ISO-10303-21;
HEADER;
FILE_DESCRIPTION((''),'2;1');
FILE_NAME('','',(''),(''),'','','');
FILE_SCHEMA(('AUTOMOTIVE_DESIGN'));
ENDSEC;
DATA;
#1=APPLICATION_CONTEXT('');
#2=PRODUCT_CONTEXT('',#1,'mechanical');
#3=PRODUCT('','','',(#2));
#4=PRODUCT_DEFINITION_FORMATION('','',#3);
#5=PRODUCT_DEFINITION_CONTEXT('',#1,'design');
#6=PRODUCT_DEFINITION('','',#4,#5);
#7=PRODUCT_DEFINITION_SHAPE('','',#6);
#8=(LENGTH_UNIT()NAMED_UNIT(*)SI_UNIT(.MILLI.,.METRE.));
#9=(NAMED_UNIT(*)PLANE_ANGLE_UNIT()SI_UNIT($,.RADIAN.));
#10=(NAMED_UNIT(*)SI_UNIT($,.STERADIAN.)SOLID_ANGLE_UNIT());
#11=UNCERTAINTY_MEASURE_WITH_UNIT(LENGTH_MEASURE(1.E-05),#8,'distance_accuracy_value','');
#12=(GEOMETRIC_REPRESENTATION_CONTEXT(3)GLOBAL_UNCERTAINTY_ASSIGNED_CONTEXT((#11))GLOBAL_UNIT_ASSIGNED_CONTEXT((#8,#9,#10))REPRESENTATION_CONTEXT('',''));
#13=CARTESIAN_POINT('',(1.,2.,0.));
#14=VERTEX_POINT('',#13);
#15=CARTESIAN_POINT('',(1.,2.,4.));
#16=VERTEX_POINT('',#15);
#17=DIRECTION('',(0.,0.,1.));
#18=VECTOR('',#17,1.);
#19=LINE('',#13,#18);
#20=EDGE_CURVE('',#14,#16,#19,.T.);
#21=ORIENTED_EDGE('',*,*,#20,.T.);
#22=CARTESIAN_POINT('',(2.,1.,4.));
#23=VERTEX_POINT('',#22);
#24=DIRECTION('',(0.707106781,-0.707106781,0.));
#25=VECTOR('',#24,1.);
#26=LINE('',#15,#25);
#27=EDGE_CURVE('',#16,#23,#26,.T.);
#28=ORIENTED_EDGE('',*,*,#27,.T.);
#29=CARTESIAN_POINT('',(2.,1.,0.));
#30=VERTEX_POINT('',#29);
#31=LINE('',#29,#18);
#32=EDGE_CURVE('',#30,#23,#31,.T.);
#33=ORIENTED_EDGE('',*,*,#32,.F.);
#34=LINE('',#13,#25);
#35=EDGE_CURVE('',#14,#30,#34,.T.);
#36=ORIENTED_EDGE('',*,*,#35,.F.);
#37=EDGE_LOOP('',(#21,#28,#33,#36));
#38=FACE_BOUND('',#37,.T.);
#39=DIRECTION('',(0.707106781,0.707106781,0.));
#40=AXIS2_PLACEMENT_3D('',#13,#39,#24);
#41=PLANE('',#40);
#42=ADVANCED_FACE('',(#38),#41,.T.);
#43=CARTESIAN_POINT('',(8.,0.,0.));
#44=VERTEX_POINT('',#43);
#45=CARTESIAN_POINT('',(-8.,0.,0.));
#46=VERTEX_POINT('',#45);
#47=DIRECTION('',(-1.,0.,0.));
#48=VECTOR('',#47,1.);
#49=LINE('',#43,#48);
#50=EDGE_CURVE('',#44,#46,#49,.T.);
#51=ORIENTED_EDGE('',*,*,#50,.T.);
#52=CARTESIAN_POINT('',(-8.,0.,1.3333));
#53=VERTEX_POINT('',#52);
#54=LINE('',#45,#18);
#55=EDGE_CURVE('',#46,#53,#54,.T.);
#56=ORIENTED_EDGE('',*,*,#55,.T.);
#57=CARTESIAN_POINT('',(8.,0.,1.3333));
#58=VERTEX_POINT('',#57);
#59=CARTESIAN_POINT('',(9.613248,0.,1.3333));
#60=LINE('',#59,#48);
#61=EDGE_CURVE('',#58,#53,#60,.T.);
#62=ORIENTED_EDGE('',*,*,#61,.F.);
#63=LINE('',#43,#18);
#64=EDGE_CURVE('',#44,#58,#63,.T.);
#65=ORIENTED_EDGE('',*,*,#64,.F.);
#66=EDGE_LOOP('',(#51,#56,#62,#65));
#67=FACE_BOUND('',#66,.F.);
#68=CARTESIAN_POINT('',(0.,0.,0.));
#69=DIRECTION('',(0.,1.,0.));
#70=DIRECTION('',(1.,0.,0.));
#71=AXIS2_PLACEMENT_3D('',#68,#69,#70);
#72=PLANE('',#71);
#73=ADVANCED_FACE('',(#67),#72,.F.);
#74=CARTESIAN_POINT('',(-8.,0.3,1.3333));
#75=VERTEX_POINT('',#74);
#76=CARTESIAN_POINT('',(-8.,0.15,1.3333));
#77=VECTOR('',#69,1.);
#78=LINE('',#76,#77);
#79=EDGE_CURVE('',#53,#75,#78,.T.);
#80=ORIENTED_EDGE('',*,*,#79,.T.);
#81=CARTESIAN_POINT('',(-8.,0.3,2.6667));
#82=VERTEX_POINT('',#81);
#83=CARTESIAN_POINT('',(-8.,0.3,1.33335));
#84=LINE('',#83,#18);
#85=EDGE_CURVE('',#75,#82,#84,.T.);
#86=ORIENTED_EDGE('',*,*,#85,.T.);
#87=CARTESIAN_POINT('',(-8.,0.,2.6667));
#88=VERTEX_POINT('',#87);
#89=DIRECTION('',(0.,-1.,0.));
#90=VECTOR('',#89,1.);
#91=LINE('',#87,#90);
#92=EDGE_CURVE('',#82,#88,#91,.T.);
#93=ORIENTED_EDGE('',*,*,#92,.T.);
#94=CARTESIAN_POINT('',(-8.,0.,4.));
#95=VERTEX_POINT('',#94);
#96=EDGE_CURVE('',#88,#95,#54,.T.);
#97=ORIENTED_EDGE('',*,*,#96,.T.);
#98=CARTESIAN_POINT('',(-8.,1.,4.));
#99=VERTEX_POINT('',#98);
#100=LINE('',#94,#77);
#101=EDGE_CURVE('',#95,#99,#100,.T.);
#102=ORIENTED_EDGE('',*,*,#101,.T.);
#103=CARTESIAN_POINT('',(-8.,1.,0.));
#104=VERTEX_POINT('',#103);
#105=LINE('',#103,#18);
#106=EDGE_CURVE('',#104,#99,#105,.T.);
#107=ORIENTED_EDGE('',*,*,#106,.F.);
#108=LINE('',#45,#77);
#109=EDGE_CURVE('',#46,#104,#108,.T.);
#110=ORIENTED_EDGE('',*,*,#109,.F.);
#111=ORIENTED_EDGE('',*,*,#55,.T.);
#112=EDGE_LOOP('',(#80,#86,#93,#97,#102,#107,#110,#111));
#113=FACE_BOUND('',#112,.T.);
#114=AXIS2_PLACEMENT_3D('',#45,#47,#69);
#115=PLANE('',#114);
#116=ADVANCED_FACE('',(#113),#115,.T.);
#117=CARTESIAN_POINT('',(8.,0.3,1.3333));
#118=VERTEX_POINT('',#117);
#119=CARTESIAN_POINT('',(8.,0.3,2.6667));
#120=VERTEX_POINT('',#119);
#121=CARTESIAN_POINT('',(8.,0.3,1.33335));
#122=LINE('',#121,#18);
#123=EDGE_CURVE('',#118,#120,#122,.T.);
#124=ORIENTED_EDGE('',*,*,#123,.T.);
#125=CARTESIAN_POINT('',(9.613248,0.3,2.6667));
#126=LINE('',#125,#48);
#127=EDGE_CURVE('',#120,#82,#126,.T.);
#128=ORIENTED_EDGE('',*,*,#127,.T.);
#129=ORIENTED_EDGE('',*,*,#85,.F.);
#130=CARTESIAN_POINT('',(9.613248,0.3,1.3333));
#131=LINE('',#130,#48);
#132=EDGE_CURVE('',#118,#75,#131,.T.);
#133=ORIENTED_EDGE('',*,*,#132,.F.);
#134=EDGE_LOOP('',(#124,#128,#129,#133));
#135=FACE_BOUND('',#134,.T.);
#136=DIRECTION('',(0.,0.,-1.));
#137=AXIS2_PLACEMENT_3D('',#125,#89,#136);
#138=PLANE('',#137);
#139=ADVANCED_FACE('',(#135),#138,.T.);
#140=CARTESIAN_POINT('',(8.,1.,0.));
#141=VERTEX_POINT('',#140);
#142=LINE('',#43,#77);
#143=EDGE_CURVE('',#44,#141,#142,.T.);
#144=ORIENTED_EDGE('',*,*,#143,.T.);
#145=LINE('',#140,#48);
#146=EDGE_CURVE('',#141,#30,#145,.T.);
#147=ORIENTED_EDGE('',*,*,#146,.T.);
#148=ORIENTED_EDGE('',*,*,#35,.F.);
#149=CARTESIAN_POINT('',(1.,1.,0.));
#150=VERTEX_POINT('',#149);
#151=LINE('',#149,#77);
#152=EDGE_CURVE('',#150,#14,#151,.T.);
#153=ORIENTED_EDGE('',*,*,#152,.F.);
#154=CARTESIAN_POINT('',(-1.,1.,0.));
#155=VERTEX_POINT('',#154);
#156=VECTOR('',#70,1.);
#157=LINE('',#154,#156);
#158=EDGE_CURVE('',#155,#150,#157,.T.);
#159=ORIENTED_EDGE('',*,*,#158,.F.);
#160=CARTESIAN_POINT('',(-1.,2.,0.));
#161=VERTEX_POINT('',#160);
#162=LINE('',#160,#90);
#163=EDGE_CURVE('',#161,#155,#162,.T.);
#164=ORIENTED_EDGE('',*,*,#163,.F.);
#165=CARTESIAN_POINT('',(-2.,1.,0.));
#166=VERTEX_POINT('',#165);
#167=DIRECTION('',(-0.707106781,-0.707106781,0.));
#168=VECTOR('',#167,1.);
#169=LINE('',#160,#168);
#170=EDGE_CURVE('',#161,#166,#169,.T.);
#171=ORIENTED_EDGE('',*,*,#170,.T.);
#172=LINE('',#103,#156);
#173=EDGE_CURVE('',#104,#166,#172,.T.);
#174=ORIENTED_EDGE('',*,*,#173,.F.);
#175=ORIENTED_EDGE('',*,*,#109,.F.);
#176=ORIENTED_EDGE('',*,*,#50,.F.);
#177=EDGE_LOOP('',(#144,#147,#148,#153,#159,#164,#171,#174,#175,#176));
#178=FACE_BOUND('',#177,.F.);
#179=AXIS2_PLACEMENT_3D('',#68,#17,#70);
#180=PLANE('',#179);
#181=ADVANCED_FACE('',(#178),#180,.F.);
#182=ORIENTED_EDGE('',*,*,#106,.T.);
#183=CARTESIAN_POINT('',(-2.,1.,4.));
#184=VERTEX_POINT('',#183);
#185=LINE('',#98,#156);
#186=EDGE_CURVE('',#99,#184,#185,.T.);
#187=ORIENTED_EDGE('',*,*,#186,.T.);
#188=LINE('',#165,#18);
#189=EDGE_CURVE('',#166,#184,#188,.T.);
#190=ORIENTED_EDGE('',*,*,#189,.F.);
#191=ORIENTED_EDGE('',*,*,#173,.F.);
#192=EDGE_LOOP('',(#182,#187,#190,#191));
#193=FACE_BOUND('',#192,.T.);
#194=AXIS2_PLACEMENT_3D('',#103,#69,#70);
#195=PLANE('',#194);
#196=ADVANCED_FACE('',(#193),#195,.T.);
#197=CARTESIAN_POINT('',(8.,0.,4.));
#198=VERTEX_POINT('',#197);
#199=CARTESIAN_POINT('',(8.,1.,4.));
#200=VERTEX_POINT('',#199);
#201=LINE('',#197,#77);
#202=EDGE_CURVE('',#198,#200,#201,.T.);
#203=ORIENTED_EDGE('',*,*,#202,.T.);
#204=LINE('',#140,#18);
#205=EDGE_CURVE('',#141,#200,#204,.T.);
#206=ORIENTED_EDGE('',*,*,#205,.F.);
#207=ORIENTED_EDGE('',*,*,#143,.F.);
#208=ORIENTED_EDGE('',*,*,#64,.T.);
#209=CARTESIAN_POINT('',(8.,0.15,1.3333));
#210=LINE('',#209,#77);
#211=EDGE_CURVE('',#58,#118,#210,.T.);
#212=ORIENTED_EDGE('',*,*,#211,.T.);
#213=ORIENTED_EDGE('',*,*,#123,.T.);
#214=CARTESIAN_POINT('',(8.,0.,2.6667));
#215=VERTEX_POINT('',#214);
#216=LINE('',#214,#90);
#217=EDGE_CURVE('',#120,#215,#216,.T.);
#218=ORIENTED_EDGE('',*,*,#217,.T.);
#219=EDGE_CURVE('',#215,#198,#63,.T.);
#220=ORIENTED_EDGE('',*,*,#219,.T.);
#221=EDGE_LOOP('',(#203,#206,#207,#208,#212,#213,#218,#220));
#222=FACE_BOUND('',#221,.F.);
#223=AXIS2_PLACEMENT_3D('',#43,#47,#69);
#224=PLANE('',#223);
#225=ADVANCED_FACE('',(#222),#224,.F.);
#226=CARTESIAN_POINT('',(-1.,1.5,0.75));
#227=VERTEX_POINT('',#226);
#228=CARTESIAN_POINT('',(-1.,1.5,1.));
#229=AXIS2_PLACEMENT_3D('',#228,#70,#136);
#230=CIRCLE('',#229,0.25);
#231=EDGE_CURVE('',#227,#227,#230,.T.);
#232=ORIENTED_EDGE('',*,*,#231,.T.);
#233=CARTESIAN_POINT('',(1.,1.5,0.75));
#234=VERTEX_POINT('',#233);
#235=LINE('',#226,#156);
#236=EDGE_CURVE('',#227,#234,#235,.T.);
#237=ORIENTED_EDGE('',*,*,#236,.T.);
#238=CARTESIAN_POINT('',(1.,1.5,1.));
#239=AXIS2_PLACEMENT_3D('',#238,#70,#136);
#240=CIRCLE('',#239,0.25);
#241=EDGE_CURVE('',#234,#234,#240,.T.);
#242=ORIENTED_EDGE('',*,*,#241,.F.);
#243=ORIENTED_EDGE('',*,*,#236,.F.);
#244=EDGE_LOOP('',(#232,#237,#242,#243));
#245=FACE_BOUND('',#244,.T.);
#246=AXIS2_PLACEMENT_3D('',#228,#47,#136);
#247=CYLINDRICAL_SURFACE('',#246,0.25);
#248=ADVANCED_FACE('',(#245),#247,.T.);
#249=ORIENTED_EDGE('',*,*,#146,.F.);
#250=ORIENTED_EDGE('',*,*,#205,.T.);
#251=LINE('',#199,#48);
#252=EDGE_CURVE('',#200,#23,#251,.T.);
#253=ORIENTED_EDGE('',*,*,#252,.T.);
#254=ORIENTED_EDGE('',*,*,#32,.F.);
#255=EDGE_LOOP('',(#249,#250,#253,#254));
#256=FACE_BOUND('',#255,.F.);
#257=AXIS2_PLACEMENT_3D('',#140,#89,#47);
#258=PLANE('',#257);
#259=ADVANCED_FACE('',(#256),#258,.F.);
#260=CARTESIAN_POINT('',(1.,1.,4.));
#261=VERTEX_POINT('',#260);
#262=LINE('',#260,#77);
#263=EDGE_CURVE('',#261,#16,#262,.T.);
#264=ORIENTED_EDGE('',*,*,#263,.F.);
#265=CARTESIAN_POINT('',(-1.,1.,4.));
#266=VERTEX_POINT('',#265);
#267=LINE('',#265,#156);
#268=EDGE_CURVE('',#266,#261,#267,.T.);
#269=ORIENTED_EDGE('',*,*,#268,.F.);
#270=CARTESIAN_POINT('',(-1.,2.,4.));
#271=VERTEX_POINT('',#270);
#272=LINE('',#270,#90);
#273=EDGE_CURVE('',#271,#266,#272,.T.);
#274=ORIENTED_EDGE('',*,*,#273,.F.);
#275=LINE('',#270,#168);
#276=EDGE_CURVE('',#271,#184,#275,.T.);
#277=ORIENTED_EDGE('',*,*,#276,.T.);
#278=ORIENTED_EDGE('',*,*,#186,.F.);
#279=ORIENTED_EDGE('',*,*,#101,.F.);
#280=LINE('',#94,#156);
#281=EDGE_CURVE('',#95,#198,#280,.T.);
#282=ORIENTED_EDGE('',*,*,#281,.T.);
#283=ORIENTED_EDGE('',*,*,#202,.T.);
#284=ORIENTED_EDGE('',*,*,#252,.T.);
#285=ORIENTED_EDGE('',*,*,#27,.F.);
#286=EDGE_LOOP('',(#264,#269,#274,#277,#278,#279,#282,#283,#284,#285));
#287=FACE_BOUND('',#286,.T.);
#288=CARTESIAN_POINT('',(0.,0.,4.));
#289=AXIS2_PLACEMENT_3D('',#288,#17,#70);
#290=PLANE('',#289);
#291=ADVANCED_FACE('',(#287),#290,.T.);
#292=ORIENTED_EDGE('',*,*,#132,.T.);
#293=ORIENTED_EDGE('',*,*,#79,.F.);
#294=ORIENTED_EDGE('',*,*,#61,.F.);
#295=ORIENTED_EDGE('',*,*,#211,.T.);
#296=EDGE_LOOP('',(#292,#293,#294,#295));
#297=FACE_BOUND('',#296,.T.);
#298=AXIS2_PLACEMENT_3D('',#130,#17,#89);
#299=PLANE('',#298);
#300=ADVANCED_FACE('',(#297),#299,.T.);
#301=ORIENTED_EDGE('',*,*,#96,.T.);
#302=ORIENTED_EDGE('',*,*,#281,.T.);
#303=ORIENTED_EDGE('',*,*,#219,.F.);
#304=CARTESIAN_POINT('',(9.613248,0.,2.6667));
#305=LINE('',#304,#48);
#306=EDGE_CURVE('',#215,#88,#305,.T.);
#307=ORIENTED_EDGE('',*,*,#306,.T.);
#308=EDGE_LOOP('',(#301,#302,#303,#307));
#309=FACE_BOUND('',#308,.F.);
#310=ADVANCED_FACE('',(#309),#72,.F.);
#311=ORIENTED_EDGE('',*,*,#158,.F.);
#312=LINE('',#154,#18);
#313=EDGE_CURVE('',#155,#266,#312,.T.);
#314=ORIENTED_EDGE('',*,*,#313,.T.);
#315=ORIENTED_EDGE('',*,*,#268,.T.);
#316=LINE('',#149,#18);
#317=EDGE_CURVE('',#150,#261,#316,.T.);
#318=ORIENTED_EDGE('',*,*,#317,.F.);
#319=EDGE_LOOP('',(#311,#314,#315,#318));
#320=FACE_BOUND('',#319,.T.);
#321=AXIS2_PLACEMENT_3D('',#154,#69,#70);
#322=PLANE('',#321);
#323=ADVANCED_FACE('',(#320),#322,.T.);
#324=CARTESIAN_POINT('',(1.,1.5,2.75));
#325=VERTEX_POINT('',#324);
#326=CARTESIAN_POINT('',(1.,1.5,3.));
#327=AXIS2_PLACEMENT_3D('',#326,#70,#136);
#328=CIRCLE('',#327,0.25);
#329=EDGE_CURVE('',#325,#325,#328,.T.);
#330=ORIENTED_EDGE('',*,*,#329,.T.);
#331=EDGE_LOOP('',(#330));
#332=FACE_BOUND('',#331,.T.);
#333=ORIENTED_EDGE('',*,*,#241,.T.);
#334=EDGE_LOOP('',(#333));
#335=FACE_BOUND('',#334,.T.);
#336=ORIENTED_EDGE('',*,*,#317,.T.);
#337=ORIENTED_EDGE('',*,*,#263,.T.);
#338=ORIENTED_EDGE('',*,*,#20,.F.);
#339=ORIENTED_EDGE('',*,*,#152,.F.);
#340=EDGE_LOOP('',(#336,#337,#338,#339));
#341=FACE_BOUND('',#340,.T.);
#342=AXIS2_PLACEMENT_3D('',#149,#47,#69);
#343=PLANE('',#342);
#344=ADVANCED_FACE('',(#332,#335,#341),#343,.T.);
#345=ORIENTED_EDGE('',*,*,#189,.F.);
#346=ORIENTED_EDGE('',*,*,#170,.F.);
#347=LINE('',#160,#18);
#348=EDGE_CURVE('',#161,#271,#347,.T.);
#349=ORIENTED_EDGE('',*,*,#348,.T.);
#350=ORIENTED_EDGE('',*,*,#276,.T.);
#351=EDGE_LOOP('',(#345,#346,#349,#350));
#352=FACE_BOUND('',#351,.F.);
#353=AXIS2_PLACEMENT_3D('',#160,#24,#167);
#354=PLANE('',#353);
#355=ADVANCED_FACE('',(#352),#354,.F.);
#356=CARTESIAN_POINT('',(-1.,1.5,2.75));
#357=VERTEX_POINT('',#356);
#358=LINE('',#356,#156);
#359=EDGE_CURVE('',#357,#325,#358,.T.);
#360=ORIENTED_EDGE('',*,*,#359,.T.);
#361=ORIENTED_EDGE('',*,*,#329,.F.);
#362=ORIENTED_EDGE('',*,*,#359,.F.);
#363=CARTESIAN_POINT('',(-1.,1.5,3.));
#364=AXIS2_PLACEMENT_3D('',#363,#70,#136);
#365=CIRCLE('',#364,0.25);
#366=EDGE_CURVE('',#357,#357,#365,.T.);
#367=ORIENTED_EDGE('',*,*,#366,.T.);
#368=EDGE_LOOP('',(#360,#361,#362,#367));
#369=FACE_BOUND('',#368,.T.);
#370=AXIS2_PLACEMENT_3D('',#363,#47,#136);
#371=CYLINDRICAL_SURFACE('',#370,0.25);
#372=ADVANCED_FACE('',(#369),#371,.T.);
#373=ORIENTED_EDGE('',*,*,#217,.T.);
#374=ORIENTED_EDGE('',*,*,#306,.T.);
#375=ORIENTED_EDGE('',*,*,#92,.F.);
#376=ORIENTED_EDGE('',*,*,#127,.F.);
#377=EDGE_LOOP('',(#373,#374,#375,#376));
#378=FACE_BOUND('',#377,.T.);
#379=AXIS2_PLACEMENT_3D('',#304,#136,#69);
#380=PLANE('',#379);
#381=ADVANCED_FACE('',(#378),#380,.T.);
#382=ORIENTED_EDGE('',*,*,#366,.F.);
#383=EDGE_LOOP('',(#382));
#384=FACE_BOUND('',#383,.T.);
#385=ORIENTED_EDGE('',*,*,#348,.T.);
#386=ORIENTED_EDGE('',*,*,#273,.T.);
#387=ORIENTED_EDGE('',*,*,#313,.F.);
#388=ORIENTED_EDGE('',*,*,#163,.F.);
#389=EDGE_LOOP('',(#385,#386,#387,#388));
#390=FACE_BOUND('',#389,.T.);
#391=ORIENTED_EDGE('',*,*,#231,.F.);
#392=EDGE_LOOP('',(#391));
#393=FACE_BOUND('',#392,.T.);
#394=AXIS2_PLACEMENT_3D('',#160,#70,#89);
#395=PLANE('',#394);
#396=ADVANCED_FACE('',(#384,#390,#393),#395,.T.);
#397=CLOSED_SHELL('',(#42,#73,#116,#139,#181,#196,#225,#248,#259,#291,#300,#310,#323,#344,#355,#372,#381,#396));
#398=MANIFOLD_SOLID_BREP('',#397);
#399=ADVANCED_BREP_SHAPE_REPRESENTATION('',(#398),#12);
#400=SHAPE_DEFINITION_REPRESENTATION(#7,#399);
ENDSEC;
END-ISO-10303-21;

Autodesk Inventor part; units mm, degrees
ref_plane "YZ Plane" through (0, 0, 0) normal (1, 0, 0) x (0, 1, 0)
ref_plane "XZ Plane" through (0, 0, 0) normal (0, 1, 0) x (-1, 0, 0)
ref_plane "XY Plane" through (0, 0, 0) normal (0, 0, 1) x (1, 0, 0)
sketch "Sketch1" plane through (0, 0, 0) normal (0, 0, 1) x (1, 0, 0)
  line L0 (-1, 2) -> (-2, 1)
  line L1 (1, 2) -> (2, 1)
  line L2 (-1, 2) -> (-1, 1)
  line L3 (-1, 1) -> (1, 1)
  line L4 (1, 1) -> (1, 2)
  line L5 (0, 0) -> (8, 0)
  line L6 (8, 0) -> (8, 1)
  line L7 (8, 1) -> (2, 1)
  line L8 (0, 0) -> (-8, 0)
  line L9 (-8, 0) -> (-8, 1)
  line L10 (-8, 1) -> (-2, 1)
  dimension "d7" = 2
  dimension "d8" = 1
  dimension "d9" = 2
  dimension "d29" = 8
  dimension "d30" = 8
extrude "Extrusion1" add sketch "Sketch1" along normal blind 4
sketch "Sketch2" plane through (-1, 1, 0) normal (1, 0, 0) x (0, 0, -1)
  line L0 (0, 0) -> (0, 1) projected
  line L1 (-4, 0) -> (-4, 1) projected
  circle A0 centre (-1, 0.5) radius 0.25
  circle A1 centre (-3, 0.5) radius 0.25
  point P0 (0, -1)
  dimension "d14" = 0.5
  dimension "d15" = 0.5
extrude "Extrusion2" add sketch "Sketch2" along normal blind 2 contours A0
sketch "Sketch3" plane through (-1, 1, 0) normal (1, 0, 0) x (0, 0, -1)
  line L0 (-4, 0) -> (-4, 1) projected
  circle A0 centre (-3, 0.5) radius 0.25
  point P0 (0, -1)
  dimension "d19" = 0.5
extrude "Extrusion3" add sketch "Sketch3" along normal blind 2
sketch "Sketch4" plane through (7, 0, 0) normal (1, 0, 0) x (0, 0, -1)
  line L0 (0, 0) -> (-1.3333, 0)
  line L1 (-1.3333, 0) -> (-1.3333, 0.3)
  line L2 (-1.3333, 0.3) -> (-2.6667, 0.3)
  line L3 (-2.6667, 0.3) -> (-2.6667, 0)
  point P0 (-4, 0)
  dimension "d22" = 1.3333
  dimension "d23" = 1.3333
  dimension "d24" = 0.3
split "Split1" [suppressed]
sketch "Sketch5" plane through (-1, 1, 0) normal (1, 0, 0) x (0, 0, -1)
  line L0 (0, 0) -> (0, 1) projected
  circle A0 centre (-1, 0.5) radius 0.25 projected
  circle A1 centre (-3, 0.5) radius 0.25 projected
  point P0 (0, -1)
  dimension "d25" = 1
  dimension "d26" = 2
sketch "Sketch6" plane through (-1, 1, 0) normal (1, 0, 0) x (0, 0, -1)
  line L0 (0, 1) -> (-4, 1) projected
  circle A0 centre (-1, 0.5) radius 0.25 projected
  point P0 (0, -1)
  dimension "d27" = 0.5
sketch "Sketch8" plane through (0, 0, 4) normal (0, 0, 1) x (1, 0, 0)
  point P0 (0, 0)
sketch "Sketch9" plane through (0, 0, 4) normal (0, 0, 1) x (1, 0, 0)
  point P0 (0, 0)
sketch "Sketch10" plane through (0, 0, 0) normal (0, 0, -1) x (-1, 0, 0)
  point P0 (0, 0)
sketch "Sketch11" plane through (-8, 0, 0) normal (-1, 0, 0) x (0, 0, 1)
  line L0 (2.6667, 0) -> (2.6667, 0.3)
  line L1 (2.6667, 0.3) -> (1.3333, 0.3)
  line L2 (1.3333, 0.3) -> (1.3333, 0)
  line L3 (2.6667, 0) -> (4, 0)
  point P0 (0, 0)
  dimension "d31" = 1.3333
  dimension "d32" = 1.3333
  dimension "d33" = 0.3
split body "Split2" sketch "Sketch11" result one side removed curves L3 L0 L1 L2 removed pieces at (-2.6667, 0.1, 1.7778)
properties part number "Tank Tread link A"
